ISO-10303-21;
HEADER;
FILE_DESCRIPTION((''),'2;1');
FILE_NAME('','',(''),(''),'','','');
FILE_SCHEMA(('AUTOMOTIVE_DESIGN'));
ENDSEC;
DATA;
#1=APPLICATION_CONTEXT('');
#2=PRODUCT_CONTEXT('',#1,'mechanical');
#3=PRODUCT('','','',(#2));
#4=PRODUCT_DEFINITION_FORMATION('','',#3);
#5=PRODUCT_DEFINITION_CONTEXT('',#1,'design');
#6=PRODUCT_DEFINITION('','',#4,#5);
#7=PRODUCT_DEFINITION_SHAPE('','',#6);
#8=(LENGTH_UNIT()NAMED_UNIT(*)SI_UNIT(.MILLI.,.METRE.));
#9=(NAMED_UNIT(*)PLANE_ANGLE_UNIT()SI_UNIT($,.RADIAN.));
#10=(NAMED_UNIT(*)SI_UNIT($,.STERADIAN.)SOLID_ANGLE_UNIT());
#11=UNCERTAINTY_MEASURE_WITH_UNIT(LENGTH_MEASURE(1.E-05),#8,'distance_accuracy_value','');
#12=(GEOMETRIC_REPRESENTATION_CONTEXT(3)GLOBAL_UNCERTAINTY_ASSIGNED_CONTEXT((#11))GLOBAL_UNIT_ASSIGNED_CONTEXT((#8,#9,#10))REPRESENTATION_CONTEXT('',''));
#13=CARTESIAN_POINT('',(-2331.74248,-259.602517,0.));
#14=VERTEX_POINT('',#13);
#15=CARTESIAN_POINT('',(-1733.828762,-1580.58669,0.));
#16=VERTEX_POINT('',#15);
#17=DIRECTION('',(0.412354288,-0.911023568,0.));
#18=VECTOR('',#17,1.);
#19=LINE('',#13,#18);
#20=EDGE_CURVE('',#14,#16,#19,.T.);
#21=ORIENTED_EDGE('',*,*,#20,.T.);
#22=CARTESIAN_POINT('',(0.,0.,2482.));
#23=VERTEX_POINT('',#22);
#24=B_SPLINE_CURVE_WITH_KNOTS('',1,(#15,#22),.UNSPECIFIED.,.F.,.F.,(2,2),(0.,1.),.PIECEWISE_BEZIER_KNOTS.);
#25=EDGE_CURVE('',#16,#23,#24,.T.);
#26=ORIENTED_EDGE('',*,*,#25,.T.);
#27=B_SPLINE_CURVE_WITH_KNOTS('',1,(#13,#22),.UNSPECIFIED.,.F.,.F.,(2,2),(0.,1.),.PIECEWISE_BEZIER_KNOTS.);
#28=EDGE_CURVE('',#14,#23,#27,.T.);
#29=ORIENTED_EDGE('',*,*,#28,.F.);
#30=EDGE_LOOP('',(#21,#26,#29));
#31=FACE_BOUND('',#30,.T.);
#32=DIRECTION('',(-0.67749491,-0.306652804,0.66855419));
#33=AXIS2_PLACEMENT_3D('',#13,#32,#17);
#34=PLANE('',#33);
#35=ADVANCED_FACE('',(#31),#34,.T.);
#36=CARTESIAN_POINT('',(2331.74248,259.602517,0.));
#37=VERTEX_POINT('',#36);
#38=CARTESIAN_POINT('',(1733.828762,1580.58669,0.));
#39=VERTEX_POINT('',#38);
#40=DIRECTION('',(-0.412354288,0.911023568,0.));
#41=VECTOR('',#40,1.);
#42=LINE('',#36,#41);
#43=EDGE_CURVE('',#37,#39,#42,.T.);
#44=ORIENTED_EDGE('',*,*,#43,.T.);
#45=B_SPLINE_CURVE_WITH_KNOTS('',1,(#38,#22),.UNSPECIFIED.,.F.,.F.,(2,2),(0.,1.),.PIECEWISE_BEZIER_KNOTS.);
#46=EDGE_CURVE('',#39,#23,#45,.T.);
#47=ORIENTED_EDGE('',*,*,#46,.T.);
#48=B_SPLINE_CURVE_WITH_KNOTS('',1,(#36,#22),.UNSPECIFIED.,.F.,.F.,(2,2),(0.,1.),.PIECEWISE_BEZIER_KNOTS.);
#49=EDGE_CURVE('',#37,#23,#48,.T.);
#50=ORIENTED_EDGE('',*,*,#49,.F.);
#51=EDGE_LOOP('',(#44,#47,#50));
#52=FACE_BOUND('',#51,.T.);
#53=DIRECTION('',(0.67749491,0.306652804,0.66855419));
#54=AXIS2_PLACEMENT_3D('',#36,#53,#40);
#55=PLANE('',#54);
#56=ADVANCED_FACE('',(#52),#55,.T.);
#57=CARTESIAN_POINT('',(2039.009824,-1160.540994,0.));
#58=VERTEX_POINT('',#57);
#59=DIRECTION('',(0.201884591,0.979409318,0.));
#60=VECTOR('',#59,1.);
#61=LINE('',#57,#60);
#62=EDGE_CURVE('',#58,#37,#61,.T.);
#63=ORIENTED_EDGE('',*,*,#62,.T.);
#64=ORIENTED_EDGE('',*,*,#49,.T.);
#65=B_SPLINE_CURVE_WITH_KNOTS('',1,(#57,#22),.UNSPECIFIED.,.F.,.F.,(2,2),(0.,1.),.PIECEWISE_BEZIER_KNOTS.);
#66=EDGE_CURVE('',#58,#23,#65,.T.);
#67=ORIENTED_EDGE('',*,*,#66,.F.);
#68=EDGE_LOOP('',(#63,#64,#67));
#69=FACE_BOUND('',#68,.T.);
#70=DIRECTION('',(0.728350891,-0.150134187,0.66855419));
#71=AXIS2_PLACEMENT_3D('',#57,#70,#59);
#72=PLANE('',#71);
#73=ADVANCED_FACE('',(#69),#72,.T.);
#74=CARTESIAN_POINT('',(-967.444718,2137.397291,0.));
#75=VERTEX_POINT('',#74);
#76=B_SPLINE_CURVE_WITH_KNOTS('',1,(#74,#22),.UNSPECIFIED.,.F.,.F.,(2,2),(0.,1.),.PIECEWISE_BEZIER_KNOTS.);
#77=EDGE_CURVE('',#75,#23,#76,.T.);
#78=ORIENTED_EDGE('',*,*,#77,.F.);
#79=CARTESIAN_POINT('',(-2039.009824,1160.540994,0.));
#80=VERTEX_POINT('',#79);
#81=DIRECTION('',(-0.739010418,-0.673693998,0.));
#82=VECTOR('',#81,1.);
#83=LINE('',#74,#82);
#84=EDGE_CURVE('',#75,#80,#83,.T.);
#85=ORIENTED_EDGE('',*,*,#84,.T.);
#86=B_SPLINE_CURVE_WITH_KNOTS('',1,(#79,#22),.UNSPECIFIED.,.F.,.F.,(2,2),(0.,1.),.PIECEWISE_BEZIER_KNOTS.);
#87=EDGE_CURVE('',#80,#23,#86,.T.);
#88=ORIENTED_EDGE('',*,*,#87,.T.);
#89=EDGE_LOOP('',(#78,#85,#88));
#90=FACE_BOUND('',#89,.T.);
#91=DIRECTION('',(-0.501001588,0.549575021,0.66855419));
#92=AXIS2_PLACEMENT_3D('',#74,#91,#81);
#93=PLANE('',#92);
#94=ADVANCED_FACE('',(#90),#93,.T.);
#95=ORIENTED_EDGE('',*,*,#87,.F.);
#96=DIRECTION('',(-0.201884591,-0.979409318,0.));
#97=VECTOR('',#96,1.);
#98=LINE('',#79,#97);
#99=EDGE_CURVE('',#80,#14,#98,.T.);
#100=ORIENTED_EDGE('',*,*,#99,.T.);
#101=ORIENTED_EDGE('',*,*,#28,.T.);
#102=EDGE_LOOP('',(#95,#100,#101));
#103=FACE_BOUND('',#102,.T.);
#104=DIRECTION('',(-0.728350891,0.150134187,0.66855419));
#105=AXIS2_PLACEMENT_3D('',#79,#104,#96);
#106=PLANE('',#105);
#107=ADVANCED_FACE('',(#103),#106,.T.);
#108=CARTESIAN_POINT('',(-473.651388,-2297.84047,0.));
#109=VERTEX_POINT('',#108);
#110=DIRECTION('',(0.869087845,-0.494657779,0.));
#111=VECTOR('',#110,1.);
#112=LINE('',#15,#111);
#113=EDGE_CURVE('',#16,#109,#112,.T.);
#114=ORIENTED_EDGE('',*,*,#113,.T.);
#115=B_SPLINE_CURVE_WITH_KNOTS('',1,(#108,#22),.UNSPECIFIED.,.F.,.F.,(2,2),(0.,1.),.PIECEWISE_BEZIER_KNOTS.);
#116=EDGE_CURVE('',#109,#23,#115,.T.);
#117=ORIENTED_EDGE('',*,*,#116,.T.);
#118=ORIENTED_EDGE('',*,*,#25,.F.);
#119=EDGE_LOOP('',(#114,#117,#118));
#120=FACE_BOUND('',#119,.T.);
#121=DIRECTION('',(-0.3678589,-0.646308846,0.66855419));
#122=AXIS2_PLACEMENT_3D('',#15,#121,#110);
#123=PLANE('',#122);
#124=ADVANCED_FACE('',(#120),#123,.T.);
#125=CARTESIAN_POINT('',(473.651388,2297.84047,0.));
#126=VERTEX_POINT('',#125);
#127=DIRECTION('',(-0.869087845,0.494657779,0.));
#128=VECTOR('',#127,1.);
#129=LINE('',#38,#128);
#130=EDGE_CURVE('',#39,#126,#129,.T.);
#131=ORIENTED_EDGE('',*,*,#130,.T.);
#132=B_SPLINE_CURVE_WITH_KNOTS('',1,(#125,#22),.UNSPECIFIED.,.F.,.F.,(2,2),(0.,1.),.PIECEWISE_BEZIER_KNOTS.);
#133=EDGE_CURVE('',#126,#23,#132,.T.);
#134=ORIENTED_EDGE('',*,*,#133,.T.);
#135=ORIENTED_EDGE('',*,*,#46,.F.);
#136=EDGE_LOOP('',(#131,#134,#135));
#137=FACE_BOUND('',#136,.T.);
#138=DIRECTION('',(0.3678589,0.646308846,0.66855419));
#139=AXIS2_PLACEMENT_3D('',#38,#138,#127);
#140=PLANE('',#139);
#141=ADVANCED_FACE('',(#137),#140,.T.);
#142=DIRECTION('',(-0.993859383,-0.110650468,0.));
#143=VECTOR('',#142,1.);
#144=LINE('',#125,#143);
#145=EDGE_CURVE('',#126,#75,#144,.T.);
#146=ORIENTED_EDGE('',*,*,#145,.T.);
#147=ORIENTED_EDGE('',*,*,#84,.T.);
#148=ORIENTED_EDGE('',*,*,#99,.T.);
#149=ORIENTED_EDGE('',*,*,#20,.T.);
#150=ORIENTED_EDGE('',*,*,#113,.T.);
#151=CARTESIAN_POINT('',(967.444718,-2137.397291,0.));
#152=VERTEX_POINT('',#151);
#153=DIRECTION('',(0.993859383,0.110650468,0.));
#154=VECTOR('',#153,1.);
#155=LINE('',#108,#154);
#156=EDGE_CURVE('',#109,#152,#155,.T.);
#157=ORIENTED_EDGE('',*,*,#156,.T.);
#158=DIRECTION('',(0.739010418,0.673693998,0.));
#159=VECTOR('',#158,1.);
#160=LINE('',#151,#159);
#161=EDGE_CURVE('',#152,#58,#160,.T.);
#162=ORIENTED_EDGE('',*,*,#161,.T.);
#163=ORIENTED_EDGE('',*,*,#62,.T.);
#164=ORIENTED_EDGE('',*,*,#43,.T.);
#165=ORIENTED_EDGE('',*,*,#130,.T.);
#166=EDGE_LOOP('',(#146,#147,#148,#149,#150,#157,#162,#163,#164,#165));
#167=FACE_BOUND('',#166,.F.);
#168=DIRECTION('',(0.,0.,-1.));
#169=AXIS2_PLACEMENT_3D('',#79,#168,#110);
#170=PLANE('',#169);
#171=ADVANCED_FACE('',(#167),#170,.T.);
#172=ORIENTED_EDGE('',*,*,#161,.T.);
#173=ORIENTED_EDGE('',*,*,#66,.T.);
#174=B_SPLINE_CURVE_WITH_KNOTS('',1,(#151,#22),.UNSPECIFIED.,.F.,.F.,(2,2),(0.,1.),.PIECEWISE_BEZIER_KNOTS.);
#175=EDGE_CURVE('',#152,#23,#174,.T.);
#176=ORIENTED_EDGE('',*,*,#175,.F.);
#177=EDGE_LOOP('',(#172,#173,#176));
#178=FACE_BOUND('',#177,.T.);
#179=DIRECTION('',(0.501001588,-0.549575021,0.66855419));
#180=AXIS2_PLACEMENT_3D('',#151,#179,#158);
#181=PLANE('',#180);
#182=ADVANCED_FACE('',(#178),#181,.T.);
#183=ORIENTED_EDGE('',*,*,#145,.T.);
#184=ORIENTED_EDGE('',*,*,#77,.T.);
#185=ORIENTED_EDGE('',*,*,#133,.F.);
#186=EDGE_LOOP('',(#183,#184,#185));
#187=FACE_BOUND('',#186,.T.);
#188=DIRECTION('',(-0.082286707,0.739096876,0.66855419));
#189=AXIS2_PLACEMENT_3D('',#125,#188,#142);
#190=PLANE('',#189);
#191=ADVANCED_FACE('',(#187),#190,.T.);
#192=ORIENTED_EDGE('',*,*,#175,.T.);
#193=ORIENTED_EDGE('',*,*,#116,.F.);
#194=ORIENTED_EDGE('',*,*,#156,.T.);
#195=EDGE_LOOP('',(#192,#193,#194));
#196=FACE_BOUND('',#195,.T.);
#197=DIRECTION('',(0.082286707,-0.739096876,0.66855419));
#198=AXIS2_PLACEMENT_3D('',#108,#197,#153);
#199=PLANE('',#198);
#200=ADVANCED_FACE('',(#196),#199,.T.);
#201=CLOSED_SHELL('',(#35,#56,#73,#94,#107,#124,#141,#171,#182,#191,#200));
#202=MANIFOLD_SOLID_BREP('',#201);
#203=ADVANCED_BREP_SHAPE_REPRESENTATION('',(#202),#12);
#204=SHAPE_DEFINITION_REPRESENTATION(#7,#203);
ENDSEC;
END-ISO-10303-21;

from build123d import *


# Not quite as in the source:
# - the program builds the solid bodies; features that only make, move or delete a surface that nothing else refers to are left out


with BuildPart() as f3:
    # F1 (on Top) → F3 section 0
    with BuildSketch(Plane.XY, mode=Mode.PRIVATE) as f3_s0:
        Polygon((-2039.0098238841, 1160.5409943), (-2331.7424803501, -259.6025167011), (-1733.8287623343, -1580.5866898873), (-473.651387779, -2297.8404697023), (967.4447180893, -2137.397290816), (2039.0098238841, -1160.5409943), (2331.7424803501, 259.6025167011), (1733.8287623343, 1580.5866898873), (473.651387779, 2297.8404697023), (-967.4447180893, 2137.397290816), align=None)
    loft([f3_s0.sketch, Vertex(0, 0, 2482)])


solid = f3.part
